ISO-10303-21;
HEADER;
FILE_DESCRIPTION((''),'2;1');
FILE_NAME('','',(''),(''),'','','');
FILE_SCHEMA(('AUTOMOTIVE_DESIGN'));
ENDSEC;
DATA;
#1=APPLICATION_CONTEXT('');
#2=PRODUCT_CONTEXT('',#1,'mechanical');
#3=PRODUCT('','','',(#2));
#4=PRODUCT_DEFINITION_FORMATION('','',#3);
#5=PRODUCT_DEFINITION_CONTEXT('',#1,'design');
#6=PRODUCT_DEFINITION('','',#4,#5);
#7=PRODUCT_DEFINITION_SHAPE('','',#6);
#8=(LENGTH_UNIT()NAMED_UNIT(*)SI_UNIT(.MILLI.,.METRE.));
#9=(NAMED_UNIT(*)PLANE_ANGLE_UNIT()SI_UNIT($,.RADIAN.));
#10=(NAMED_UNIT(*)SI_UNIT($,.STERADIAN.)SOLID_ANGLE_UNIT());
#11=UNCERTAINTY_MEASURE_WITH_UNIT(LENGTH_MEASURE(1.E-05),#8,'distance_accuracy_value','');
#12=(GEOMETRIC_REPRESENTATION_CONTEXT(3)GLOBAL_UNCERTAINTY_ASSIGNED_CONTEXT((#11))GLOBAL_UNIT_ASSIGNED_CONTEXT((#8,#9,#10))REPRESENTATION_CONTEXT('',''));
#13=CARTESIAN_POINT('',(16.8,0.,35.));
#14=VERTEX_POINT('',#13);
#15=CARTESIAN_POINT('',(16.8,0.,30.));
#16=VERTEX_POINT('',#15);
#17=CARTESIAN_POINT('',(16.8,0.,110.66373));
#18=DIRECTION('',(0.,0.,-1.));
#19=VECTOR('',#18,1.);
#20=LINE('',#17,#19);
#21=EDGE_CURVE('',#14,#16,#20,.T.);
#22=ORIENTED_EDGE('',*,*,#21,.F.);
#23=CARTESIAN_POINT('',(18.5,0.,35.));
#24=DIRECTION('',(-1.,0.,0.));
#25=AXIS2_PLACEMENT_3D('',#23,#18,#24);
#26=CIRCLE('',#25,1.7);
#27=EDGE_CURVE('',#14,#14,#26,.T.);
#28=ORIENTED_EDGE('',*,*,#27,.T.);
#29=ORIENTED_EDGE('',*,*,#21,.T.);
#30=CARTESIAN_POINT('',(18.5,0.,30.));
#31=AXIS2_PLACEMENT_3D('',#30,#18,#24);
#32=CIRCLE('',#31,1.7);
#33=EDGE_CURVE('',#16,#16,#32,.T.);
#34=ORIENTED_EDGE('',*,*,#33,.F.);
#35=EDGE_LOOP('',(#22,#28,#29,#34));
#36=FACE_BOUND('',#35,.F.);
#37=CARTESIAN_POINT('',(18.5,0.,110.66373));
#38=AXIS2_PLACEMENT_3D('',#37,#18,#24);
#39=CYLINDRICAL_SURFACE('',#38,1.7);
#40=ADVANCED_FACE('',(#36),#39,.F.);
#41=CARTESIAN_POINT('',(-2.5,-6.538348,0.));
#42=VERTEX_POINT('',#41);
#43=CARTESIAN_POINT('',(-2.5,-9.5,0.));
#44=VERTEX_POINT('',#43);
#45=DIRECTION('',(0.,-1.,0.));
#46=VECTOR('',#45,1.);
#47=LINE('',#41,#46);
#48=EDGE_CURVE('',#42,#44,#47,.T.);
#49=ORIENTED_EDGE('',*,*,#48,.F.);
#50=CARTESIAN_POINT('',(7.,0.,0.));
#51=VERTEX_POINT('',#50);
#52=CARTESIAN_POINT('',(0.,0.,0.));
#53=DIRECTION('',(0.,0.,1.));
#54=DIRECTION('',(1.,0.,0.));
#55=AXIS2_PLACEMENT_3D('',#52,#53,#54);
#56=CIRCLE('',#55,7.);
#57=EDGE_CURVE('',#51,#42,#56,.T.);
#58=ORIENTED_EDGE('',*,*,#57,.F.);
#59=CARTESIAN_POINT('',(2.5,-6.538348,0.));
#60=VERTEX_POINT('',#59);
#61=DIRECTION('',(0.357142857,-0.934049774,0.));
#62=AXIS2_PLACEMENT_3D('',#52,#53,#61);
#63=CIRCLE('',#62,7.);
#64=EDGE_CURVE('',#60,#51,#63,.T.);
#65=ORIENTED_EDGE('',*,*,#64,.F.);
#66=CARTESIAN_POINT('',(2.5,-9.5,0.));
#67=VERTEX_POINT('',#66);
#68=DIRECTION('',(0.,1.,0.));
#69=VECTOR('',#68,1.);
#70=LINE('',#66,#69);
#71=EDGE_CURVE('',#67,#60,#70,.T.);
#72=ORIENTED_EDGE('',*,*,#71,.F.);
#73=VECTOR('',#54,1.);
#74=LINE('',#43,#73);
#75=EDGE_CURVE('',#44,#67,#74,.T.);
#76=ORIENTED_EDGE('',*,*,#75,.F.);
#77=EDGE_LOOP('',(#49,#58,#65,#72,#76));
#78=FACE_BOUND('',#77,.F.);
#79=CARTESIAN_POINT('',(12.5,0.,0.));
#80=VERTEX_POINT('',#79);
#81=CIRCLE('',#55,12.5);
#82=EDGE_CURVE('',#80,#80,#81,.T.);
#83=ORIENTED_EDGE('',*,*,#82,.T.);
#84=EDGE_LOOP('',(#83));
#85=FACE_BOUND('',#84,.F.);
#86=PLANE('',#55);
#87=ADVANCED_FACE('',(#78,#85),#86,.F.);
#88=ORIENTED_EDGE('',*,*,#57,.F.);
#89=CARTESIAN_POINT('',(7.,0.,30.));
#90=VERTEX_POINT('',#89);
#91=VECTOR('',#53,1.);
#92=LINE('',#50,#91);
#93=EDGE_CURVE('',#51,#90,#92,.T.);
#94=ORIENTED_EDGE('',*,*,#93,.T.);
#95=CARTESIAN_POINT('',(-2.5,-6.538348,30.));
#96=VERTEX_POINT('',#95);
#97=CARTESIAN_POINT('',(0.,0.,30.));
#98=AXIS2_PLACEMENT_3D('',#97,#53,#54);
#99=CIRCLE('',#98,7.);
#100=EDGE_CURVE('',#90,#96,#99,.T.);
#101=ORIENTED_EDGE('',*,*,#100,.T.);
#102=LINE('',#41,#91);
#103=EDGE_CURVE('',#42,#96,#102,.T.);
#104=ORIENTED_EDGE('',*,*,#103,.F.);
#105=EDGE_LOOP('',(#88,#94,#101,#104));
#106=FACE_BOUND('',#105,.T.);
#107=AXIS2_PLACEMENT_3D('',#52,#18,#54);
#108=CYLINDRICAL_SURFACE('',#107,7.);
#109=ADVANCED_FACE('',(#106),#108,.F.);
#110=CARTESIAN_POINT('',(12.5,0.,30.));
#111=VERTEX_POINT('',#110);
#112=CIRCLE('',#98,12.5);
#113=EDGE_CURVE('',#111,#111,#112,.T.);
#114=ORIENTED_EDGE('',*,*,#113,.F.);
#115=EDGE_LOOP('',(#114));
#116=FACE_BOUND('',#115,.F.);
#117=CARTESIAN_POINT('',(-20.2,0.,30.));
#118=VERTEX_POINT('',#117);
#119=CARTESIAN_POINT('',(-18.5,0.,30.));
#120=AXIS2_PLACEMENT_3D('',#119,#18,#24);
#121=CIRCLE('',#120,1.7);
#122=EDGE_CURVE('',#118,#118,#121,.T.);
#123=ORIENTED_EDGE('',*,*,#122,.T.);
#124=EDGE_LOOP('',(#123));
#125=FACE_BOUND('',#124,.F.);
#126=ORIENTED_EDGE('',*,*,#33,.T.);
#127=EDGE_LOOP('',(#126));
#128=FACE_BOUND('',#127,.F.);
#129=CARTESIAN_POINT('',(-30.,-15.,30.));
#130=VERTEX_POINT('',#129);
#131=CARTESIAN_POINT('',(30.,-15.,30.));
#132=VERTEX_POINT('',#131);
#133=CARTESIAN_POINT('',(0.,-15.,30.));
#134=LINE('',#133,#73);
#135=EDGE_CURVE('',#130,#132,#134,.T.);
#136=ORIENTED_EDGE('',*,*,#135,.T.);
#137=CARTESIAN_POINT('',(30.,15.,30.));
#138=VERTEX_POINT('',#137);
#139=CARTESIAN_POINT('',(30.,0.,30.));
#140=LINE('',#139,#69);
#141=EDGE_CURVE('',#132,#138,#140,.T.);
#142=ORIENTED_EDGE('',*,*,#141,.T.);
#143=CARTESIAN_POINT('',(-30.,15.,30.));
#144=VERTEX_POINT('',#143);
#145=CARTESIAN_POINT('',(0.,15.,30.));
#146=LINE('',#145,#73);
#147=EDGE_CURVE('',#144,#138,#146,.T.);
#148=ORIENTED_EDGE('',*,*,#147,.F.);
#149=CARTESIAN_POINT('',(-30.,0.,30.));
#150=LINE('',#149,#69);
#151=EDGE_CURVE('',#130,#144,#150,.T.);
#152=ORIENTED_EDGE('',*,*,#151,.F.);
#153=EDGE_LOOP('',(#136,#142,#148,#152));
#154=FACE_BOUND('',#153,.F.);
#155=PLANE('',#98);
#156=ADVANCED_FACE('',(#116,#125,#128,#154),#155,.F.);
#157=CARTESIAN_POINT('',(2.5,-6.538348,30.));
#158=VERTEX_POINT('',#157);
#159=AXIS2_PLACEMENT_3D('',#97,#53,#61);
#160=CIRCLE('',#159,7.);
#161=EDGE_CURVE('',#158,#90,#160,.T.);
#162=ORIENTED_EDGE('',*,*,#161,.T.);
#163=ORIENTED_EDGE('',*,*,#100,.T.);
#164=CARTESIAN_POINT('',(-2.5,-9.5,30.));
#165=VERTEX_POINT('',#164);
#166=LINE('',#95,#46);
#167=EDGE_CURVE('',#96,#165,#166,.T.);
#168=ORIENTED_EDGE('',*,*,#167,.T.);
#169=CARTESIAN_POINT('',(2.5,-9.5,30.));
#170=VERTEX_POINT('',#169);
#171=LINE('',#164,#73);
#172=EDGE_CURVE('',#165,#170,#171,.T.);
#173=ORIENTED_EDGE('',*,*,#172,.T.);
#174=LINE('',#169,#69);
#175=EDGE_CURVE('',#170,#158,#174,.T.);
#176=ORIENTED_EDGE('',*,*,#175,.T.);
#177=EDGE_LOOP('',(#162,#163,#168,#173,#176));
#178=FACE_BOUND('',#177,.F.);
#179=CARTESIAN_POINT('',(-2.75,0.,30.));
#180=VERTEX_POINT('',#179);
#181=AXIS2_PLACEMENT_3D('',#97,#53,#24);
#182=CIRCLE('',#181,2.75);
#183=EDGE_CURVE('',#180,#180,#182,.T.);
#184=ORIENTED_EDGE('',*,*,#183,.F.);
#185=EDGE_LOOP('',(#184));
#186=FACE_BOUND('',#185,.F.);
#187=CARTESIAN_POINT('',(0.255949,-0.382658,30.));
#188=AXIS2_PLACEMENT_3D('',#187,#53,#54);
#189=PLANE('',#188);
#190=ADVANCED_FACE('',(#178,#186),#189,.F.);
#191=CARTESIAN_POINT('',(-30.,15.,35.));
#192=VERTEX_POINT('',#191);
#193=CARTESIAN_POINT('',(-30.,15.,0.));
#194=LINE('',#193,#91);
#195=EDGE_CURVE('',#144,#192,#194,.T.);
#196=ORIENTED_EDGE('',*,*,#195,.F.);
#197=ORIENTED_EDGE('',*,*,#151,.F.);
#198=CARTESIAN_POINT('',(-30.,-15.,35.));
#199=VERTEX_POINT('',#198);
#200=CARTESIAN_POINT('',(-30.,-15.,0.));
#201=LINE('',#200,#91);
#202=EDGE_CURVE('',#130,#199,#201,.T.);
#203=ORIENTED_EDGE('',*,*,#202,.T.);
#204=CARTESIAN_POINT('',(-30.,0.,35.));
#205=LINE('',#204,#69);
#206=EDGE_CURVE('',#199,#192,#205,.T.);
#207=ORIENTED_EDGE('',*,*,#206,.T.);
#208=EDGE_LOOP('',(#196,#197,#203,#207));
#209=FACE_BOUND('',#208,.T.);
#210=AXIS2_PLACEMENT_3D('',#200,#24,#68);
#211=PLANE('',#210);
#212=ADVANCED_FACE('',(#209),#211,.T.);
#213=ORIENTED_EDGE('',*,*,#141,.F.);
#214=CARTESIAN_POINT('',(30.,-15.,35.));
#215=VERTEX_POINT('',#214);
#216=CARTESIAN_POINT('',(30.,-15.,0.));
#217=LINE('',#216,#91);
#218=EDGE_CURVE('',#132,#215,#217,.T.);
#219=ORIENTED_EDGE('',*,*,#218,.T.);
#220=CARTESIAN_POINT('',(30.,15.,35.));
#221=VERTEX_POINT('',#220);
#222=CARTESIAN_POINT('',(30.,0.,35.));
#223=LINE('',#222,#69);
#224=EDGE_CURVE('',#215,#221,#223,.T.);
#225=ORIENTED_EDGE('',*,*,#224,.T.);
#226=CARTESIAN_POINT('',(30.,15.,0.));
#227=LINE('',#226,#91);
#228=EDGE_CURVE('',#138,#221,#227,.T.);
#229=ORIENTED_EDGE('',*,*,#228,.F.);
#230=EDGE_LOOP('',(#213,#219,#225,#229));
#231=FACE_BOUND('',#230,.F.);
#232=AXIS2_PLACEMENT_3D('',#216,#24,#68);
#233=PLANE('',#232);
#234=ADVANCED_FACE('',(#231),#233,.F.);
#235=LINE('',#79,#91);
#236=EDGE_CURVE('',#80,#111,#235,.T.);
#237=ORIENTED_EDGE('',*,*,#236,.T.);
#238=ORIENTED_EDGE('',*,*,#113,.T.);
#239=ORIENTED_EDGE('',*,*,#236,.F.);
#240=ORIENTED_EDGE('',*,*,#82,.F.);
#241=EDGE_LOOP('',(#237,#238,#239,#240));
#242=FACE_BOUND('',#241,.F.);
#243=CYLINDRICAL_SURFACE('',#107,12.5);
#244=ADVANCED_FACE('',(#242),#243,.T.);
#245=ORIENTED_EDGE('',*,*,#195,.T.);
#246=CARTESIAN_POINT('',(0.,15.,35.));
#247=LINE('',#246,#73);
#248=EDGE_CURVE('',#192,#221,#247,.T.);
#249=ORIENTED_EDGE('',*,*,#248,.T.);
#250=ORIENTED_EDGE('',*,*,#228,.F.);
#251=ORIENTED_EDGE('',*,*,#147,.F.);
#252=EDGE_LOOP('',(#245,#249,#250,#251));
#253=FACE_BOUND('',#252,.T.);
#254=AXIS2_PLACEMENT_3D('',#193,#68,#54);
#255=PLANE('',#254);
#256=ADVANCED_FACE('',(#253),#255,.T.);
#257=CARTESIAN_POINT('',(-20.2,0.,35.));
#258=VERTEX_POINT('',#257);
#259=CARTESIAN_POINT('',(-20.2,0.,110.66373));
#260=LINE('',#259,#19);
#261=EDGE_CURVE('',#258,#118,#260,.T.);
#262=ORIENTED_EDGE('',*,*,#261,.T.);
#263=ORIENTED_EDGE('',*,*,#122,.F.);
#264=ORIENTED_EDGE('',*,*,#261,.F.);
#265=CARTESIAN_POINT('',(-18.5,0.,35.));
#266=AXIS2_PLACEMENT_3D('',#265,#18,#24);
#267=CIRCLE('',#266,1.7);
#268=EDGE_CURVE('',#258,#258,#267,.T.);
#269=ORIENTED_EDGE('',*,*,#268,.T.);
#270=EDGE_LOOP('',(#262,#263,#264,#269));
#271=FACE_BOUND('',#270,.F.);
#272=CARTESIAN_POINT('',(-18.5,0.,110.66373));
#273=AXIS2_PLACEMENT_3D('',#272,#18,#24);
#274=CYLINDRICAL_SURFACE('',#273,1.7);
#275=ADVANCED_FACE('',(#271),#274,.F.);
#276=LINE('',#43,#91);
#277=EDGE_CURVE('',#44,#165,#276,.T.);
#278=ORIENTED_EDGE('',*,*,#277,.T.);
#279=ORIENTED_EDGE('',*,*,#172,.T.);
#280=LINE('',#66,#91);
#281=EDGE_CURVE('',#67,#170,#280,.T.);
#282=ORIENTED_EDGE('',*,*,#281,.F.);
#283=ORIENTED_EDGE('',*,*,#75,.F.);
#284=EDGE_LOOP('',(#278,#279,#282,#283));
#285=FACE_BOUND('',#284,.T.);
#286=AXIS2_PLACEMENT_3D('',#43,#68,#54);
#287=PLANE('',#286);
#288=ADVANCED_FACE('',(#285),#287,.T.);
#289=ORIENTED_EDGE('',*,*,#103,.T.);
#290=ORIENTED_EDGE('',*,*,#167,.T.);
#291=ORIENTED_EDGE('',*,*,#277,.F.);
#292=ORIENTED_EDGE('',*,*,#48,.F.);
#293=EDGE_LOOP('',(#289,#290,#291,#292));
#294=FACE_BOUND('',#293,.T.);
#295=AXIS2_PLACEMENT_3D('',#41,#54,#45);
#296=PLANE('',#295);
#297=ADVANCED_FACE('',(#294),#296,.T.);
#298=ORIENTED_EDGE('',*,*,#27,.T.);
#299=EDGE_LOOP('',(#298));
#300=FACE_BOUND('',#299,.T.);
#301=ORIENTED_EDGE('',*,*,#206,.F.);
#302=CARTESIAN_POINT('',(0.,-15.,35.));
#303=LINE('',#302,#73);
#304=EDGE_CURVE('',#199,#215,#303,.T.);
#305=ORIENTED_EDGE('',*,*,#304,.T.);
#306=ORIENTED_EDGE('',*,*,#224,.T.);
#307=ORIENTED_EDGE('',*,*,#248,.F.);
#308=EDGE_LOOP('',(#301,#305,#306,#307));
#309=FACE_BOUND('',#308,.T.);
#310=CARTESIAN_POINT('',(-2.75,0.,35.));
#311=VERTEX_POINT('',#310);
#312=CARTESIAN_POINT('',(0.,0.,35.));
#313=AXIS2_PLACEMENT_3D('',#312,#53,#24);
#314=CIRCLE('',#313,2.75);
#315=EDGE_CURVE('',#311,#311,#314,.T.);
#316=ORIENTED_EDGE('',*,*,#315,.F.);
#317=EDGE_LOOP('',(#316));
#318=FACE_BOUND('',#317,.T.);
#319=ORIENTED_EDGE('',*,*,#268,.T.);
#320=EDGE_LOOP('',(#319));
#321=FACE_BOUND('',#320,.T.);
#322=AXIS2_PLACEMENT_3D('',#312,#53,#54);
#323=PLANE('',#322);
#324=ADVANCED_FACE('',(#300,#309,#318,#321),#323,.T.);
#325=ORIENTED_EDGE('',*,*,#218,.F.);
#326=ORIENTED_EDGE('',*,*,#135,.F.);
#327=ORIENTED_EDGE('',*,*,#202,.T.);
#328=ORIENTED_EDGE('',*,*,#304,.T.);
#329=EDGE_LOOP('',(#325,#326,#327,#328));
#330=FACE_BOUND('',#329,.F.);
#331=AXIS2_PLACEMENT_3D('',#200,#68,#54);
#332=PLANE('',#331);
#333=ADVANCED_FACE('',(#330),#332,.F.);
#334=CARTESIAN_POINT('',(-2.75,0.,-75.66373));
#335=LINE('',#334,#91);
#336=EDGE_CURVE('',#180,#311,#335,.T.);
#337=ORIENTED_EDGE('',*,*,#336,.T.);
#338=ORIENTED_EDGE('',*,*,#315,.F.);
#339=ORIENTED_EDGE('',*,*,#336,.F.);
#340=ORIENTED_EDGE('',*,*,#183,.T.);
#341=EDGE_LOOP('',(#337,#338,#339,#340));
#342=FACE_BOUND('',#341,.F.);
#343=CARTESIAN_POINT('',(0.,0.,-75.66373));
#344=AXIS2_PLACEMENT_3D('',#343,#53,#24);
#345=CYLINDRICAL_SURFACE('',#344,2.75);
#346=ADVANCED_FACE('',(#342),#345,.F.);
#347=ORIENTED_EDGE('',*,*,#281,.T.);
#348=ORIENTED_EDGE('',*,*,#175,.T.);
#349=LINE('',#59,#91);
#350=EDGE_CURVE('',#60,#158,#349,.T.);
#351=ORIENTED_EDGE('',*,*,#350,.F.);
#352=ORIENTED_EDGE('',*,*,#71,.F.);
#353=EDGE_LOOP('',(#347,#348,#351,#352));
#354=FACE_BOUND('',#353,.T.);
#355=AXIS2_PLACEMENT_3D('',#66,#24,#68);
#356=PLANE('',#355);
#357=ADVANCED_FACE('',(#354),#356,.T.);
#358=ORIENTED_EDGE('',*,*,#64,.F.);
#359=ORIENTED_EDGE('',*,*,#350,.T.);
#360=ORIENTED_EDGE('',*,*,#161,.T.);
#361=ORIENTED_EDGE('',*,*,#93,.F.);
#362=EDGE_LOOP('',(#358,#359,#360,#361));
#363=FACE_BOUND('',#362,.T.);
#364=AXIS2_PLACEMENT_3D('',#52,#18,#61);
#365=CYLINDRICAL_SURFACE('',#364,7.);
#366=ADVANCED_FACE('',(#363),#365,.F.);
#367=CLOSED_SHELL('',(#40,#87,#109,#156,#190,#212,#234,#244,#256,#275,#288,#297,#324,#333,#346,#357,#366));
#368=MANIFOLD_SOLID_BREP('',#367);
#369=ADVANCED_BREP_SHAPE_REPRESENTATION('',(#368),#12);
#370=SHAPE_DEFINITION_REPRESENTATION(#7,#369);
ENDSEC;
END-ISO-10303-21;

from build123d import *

# Parameters (mm, degrees)
F0_W     = 60
F0_H     = 30
F1_DEPTH = 35
F2_DEPTH = 30
F4_W     = 60
F4_H     = 30
F4_R     = 12.5
F5_DEPTH = 30
F7_D     = 3.4
F8_D     = 5.5


with BuildPart() as f1:
    # F0 (on Top) → F1 (new body)
    with BuildSketch(Plane.XY):
        Rectangle(F0_W, F0_H)
        with BuildLine():
            ThreePointArc((-2.5, -6.5383484153), (-3.9686269666, 5.7662812973), (7, 0))
            ThreePointArc((7, 0), (5.7662812973, -3.9686269666), (2.5, -6.5383484153))
            Line((2.5, -6.5383484153), (2.5, -9.5))
            Line((2.5, -9.5), (0, -9.5))
            Line((0, -9.5), (-2.5, -9.5))
            Line((-2.5, -9.5), (-2.5, -6.5383484153))
        make_face(mode=Mode.SUBTRACT)
        with BuildLine():
            ThreePointArc((2.5, -6.5383484153), (5.7662812973, -3.9686269666), (7, 0))
            ThreePointArc((7, 0), (-3.9686269666, 5.7662812973), (-2.5, -6.5383484153))
            ThreePointArc((-2.5, -6.5383484153), (0, -7), (2.5, -6.5383484153))
        make_face()
        with BuildLine():
            ThreePointArc((2.5, -6.5383484153), (0, -7), (-2.5, -6.5383484153))
            Line((-2.5, -6.5383484153), (-2.5, -9.5))
            Line((-2.5, -9.5), (0, -9.5))
            Line((0, -9.5), (2.5, -9.5))
            Line((2.5, -9.5), (2.5, -6.5383484153))
        make_face()
    extrude(amount=F1_DEPTH)

    # F0 (on Top) → F2 (cut)
    with BuildSketch(Plane.XY):
        with BuildLine():
            ThreePointArc((2.5, -6.5383484153), (5.7662812973, -3.9686269666), (7, 0))
            ThreePointArc((7, 0), (-3.9686269666, 5.7662812973), (-2.5, -6.5383484153))
            ThreePointArc((-2.5, -6.5383484153), (0, -7), (2.5, -6.5383484153))
        make_face()
        with BuildLine():
            ThreePointArc((2.5, -6.5383484153), (0, -7), (-2.5, -6.5383484153))
            Line((-2.5, -6.5383484153), (-2.5, -9.5))
            Line((-2.5, -9.5), (0, -9.5))
            Line((0, -9.5), (2.5, -9.5))
            Line((2.5, -9.5), (2.5, -6.5383484153))
        make_face()
    extrude(amount=F2_DEPTH, mode=Mode.SUBTRACT)

    # F4 (on face) → F5 (cut)
    with BuildSketch(Plane.XY):
        Rectangle(F4_W, F4_H)
        Circle(F4_R, mode=Mode.SUBTRACT)
    extrude(amount=F5_DEPTH, mode=Mode.SUBTRACT)

    # F7 (through all)
    with Locations(Plane.XY.offset(35)):
        with Locations((-18.5, 0), (18.5, 0)):
            Hole(F7_D / 2)

    # F8 (through all)
    with Locations(Plane(origin=(0, 0, 0), x_dir=(1, 0, 0), z_dir=(0, 0, -1))):
        with Locations((0, 0)):
            Hole(F8_D / 2)


solid = f1.part
